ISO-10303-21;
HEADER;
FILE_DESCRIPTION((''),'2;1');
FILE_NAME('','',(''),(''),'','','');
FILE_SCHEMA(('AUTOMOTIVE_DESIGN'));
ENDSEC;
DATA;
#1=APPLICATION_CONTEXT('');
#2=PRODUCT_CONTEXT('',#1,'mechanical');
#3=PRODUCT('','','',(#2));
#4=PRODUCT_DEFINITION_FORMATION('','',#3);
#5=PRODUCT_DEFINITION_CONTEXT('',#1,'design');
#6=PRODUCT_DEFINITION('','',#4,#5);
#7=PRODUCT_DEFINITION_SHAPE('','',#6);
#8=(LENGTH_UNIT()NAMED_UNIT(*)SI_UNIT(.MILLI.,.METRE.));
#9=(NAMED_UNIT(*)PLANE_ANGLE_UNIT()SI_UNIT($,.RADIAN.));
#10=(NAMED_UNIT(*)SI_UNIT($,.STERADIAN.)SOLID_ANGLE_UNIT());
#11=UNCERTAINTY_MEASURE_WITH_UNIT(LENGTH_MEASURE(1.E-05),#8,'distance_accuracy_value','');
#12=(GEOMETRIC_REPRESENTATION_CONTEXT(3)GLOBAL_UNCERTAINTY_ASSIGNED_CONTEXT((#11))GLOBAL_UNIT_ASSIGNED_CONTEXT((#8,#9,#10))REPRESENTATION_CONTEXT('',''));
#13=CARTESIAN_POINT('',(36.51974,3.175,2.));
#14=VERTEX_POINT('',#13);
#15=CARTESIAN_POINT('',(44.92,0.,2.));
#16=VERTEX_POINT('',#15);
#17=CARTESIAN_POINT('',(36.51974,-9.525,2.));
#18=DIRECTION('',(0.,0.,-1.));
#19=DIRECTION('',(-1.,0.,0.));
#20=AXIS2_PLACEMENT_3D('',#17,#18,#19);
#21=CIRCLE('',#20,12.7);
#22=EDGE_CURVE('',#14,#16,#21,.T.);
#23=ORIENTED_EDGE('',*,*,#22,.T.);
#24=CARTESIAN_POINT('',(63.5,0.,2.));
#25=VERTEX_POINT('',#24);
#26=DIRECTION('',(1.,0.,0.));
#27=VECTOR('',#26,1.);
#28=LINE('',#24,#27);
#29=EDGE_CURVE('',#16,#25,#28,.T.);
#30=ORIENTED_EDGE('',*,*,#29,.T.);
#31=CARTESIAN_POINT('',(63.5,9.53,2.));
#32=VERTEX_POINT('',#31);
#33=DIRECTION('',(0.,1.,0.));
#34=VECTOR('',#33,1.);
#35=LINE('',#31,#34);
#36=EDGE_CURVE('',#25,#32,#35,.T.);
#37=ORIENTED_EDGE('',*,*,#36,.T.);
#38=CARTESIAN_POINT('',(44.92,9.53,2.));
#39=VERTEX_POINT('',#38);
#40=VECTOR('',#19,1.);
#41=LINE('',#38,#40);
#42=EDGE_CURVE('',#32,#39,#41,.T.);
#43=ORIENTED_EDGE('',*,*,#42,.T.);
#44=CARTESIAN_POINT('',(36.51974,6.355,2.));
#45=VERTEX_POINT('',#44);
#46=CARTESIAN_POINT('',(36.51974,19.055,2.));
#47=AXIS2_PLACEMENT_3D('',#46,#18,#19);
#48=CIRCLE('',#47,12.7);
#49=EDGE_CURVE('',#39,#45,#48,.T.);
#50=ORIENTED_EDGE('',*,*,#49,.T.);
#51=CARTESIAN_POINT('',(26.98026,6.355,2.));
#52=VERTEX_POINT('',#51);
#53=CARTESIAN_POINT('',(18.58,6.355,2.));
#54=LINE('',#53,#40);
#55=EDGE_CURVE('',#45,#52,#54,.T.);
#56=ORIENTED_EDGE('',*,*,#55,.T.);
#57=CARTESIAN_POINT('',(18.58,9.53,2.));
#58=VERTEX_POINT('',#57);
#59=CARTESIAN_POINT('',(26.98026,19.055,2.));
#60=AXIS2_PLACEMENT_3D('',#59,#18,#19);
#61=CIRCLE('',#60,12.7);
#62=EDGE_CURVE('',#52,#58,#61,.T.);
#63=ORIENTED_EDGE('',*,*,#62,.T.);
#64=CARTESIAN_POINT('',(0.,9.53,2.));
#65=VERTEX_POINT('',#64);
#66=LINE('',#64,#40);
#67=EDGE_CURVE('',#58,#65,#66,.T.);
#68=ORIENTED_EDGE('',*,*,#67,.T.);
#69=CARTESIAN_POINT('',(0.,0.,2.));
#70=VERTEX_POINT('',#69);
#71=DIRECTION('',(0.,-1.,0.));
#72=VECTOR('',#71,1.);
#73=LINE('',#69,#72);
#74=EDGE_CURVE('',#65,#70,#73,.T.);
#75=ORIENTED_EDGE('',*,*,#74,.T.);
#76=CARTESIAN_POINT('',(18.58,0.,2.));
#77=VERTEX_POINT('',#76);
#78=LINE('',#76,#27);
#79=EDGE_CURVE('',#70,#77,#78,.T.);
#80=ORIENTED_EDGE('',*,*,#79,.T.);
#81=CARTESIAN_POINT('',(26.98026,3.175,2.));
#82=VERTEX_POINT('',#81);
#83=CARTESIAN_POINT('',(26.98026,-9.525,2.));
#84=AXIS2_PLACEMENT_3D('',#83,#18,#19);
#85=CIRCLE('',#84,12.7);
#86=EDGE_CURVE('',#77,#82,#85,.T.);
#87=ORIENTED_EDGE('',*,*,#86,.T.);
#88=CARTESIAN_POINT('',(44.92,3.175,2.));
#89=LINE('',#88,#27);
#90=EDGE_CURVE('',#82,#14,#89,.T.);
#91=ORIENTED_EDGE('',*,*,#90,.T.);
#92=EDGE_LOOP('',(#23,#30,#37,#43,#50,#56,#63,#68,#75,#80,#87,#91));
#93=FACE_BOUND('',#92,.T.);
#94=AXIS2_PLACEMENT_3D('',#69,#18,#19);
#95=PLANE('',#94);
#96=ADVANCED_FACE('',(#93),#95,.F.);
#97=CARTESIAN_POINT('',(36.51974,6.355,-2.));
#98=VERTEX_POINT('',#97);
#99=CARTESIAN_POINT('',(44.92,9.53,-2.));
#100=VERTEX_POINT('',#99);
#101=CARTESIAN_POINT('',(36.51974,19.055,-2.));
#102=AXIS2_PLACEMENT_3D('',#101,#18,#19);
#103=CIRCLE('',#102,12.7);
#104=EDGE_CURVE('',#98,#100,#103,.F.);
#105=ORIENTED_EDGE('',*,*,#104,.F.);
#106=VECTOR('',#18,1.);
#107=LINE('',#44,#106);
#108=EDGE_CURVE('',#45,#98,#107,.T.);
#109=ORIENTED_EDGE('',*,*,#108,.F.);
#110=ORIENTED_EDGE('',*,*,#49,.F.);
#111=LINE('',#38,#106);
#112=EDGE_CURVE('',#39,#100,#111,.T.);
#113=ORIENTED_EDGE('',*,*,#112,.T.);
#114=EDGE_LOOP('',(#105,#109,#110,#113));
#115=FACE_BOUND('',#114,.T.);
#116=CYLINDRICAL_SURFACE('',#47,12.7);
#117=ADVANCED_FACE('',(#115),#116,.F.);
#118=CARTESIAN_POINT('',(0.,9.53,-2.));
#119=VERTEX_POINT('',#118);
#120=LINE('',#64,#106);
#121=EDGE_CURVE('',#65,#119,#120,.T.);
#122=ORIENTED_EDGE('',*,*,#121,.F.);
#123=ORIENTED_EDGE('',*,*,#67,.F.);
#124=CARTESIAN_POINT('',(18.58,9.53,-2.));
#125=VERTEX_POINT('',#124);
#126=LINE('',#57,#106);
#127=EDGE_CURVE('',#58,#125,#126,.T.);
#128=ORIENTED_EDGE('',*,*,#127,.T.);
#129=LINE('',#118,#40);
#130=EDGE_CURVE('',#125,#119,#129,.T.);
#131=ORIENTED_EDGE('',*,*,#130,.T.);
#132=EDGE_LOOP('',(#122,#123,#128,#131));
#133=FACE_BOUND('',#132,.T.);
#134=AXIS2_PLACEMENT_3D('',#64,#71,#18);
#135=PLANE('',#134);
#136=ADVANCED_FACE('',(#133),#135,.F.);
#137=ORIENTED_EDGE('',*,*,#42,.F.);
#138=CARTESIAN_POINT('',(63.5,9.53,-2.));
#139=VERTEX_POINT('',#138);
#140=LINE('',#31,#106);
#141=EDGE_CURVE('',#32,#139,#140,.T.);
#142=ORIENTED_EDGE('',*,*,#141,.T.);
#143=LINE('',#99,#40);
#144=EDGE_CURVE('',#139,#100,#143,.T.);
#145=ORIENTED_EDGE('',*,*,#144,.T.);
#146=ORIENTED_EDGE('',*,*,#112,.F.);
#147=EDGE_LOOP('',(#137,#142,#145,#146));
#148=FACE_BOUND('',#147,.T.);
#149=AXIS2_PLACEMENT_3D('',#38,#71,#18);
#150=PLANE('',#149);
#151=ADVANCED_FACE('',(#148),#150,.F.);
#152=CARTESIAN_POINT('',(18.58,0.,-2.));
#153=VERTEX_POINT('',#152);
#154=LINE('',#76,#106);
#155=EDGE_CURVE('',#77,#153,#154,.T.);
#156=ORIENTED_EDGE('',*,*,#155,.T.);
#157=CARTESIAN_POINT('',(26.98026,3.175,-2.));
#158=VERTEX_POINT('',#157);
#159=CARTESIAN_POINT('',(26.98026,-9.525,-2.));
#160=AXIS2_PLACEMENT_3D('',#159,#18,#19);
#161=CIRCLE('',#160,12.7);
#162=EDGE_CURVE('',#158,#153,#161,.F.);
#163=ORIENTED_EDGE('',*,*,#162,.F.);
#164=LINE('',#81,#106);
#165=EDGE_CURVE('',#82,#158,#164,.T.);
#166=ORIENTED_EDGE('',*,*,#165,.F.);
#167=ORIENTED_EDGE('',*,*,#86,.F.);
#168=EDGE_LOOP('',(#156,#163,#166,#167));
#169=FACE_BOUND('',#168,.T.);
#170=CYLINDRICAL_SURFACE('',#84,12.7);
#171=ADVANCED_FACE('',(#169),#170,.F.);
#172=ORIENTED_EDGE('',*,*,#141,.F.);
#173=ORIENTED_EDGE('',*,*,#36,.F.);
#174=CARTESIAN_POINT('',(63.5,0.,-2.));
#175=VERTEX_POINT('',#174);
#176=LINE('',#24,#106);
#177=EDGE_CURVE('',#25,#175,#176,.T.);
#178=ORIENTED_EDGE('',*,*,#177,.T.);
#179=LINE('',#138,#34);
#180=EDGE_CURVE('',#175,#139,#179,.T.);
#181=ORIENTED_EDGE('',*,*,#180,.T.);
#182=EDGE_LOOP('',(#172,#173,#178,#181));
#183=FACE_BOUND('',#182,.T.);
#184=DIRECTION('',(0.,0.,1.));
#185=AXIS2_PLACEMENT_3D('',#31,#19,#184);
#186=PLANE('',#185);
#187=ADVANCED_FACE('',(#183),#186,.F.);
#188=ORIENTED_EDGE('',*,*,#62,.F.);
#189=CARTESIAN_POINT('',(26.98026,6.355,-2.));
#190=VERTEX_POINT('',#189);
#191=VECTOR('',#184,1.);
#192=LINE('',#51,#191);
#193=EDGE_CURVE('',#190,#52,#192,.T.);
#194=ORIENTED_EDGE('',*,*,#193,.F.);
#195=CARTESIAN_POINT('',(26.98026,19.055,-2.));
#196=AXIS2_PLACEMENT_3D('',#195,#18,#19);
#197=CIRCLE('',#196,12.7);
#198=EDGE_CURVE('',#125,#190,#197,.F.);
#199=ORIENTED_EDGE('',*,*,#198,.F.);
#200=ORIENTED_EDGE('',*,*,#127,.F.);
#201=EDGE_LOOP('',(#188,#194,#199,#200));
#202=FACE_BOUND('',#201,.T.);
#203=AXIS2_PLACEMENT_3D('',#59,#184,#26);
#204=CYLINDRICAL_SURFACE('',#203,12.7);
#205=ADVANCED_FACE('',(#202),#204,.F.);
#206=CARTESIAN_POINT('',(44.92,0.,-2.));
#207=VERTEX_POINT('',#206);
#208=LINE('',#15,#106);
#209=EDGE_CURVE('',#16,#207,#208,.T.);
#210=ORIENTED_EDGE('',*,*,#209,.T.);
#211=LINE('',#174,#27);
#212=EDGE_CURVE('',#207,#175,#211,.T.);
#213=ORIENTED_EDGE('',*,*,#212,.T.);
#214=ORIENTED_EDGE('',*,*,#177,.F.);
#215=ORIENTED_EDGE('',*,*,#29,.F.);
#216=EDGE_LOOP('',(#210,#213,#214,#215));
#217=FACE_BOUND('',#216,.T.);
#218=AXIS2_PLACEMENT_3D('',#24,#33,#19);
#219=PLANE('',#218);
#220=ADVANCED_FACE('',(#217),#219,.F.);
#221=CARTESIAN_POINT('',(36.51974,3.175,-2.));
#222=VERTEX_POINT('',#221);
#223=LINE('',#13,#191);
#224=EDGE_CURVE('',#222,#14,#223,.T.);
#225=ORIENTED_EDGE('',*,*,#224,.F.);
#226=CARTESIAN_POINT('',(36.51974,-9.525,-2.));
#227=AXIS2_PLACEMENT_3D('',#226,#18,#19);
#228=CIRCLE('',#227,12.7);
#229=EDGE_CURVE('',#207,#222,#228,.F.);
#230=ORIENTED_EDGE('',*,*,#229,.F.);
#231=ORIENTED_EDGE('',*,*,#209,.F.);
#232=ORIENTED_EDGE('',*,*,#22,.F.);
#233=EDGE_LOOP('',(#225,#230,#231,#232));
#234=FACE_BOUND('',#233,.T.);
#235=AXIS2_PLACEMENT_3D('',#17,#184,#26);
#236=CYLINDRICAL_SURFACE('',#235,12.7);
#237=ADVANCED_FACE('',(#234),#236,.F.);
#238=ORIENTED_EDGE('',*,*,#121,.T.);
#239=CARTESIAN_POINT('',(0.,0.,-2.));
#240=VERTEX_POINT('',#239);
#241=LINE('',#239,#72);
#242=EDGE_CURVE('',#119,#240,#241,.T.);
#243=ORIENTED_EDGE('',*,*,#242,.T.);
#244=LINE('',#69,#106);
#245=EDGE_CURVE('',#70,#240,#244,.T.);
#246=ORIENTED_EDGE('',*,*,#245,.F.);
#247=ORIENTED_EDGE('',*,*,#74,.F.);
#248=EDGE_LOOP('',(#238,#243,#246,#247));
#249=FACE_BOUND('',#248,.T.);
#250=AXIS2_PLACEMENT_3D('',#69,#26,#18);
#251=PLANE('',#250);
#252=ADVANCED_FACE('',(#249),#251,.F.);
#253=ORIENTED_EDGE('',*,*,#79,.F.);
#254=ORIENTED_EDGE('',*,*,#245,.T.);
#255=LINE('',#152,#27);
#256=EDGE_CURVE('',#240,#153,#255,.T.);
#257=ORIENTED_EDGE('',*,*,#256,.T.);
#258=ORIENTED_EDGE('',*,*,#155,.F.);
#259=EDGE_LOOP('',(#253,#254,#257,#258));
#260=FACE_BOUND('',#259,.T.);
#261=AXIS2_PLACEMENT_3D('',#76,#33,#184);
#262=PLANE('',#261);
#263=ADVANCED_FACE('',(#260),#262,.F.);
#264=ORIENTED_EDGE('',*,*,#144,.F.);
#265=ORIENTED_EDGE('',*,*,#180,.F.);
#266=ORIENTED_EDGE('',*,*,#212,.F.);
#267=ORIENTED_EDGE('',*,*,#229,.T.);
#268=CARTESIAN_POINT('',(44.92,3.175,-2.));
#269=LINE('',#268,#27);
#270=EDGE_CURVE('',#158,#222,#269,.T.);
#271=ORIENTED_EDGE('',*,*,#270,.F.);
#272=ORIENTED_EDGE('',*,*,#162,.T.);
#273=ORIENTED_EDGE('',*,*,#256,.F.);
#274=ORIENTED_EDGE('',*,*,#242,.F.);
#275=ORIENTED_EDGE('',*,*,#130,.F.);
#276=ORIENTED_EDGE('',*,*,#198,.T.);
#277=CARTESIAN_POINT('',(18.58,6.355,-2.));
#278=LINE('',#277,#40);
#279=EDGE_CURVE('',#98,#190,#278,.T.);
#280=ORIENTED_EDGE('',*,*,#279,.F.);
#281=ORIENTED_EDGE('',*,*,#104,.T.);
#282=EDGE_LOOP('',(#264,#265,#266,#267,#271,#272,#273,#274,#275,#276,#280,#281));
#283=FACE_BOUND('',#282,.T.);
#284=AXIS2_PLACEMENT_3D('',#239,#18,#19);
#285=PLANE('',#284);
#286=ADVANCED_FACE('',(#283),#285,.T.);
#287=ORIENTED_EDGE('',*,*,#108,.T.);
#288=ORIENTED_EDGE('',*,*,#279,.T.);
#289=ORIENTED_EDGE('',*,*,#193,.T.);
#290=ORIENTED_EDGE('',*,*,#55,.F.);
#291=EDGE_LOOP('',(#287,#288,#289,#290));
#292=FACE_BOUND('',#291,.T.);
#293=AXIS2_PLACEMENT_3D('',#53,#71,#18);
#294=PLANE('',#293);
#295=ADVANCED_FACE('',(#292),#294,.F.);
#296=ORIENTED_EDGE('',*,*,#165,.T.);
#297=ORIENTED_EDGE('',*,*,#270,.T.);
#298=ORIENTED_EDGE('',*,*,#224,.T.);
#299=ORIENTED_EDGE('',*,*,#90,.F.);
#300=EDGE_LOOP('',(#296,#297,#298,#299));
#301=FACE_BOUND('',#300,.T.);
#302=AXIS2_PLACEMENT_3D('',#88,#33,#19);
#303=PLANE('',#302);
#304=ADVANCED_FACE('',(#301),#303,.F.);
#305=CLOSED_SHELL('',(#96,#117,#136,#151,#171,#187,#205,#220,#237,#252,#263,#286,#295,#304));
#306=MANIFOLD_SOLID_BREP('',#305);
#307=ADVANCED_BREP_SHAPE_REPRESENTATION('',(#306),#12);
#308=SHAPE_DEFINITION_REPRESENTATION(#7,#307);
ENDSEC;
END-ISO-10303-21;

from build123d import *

# Parameters (mm, degrees)
BOSS_EXTRUDE1_DEPTH = 2
FILLET1_R           = 12.7
FILLET2_R           = 12.7


with BuildPart() as part:
    # Sketch1 → Boss-Extrude1 (new, symmetric)
    with BuildSketch(Plane.XY):
        Polygon((0, 0), (0, 9.53), (18.58, 9.53), (18.58, 6.355), (44.92, 6.355), (44.92, 9.53), (63.5, 9.53), (63.5, 0), (44.92, 0), (44.92, 3.175), (18.58, 3.175), (18.58, 0), align=None)
    extrude(amount=BOSS_EXTRUDE1_DEPTH, both=True)

    # Fillet1
    # the kernel refuses this fillet: 12.7 mm, written as the material it adds along each edge
    with BuildSketch(Plane(origin=(44.92, 3.175, 2), x_dir=(-1, 0, 0), z_dir=(0, 0, -1))) as fillet1_piece_1:
        with BuildLine():
            CenterArc((8.400260413, -12.7), FILLET1_R, 90, 41.409622109)
            Line((0, -3.175), (-0.168005208, -2.9845))
            ThreePointArc((-0.168005208, -2.9845), (-0.254, -1.5875), (-0.254, 0))
            Line((-0.254, 0), (0, 0.254))
            Line((0, 0.254), (8.400260413, 0.254))
            Line((8.400260413, 0.254), (8.400260413, 0))
        make_face()
    extrude(amount=4)
    with BuildSketch(Plane(origin=(18.58, 3.175, -2), x_dir=(0, -1, 0), z_dir=(0, 0, 1))) as fillet1_piece_2:
        with BuildLine():
            CenterArc((12.7, 8.400260413), FILLET1_R, 180, 41.409622109)
            Line((0, 8.400260413), (-0.254, 8.400260413))
            Line((-0.254, 8.400260413), (-0.254, 0))
            Line((-0.254, 0), (0, -0.254))
            ThreePointArc((0, -0.254), (1.5875, -0.254), (2.9845, -0.168005208))
            Line((2.9845, -0.168005208), (3.175, 0))
        make_face()
    extrude(amount=4)

    # Fillet2
    # the kernel refuses this fillet: 12.7 mm, written as the material it adds along each edge
    with BuildSketch(Plane(origin=(44.92, 6.355, 2), x_dir=(-1, 0, 0), z_dir=(0, 0, -1))) as fillet2_piece_1:
        with BuildLine():
            CenterArc((8.400260413, 12.7), FILLET2_R, 228.590377891, 41.409622109)
            Line((0, 3.175), (-0.168005208, 2.9845))
            ThreePointArc((-0.168005208, 2.9845), (-0.254, 1.5875), (-0.254, 0))
            Line((-0.254, 0), (0, -0.254))
            Line((0, -0.254), (8.400260413, -0.254))
            Line((8.400260413, -0.254), (8.400260413, 0))
        make_face()
    extrude(amount=4)
    with BuildSketch(Plane(origin=(18.58, 6.355, 2), x_dir=(0, 1, 0), z_dir=(0, 0, -1))) as fillet2_piece_2:
        with BuildLine():
            CenterArc((12.7, 8.400260413), FILLET2_R, 180, 41.409622109)
            Line((0, 8.400260413), (-0.254, 8.400260413))
            Line((-0.254, 8.400260413), (-0.254, 0))
            Line((-0.254, 0), (0, -0.254))
            ThreePointArc((0, -0.254), (1.5875, -0.254), (2.9845, -0.168005208))
            Line((2.9845, -0.168005208), (3.175, 0))
        make_face()
    extrude(amount=4)


solid = part.part
